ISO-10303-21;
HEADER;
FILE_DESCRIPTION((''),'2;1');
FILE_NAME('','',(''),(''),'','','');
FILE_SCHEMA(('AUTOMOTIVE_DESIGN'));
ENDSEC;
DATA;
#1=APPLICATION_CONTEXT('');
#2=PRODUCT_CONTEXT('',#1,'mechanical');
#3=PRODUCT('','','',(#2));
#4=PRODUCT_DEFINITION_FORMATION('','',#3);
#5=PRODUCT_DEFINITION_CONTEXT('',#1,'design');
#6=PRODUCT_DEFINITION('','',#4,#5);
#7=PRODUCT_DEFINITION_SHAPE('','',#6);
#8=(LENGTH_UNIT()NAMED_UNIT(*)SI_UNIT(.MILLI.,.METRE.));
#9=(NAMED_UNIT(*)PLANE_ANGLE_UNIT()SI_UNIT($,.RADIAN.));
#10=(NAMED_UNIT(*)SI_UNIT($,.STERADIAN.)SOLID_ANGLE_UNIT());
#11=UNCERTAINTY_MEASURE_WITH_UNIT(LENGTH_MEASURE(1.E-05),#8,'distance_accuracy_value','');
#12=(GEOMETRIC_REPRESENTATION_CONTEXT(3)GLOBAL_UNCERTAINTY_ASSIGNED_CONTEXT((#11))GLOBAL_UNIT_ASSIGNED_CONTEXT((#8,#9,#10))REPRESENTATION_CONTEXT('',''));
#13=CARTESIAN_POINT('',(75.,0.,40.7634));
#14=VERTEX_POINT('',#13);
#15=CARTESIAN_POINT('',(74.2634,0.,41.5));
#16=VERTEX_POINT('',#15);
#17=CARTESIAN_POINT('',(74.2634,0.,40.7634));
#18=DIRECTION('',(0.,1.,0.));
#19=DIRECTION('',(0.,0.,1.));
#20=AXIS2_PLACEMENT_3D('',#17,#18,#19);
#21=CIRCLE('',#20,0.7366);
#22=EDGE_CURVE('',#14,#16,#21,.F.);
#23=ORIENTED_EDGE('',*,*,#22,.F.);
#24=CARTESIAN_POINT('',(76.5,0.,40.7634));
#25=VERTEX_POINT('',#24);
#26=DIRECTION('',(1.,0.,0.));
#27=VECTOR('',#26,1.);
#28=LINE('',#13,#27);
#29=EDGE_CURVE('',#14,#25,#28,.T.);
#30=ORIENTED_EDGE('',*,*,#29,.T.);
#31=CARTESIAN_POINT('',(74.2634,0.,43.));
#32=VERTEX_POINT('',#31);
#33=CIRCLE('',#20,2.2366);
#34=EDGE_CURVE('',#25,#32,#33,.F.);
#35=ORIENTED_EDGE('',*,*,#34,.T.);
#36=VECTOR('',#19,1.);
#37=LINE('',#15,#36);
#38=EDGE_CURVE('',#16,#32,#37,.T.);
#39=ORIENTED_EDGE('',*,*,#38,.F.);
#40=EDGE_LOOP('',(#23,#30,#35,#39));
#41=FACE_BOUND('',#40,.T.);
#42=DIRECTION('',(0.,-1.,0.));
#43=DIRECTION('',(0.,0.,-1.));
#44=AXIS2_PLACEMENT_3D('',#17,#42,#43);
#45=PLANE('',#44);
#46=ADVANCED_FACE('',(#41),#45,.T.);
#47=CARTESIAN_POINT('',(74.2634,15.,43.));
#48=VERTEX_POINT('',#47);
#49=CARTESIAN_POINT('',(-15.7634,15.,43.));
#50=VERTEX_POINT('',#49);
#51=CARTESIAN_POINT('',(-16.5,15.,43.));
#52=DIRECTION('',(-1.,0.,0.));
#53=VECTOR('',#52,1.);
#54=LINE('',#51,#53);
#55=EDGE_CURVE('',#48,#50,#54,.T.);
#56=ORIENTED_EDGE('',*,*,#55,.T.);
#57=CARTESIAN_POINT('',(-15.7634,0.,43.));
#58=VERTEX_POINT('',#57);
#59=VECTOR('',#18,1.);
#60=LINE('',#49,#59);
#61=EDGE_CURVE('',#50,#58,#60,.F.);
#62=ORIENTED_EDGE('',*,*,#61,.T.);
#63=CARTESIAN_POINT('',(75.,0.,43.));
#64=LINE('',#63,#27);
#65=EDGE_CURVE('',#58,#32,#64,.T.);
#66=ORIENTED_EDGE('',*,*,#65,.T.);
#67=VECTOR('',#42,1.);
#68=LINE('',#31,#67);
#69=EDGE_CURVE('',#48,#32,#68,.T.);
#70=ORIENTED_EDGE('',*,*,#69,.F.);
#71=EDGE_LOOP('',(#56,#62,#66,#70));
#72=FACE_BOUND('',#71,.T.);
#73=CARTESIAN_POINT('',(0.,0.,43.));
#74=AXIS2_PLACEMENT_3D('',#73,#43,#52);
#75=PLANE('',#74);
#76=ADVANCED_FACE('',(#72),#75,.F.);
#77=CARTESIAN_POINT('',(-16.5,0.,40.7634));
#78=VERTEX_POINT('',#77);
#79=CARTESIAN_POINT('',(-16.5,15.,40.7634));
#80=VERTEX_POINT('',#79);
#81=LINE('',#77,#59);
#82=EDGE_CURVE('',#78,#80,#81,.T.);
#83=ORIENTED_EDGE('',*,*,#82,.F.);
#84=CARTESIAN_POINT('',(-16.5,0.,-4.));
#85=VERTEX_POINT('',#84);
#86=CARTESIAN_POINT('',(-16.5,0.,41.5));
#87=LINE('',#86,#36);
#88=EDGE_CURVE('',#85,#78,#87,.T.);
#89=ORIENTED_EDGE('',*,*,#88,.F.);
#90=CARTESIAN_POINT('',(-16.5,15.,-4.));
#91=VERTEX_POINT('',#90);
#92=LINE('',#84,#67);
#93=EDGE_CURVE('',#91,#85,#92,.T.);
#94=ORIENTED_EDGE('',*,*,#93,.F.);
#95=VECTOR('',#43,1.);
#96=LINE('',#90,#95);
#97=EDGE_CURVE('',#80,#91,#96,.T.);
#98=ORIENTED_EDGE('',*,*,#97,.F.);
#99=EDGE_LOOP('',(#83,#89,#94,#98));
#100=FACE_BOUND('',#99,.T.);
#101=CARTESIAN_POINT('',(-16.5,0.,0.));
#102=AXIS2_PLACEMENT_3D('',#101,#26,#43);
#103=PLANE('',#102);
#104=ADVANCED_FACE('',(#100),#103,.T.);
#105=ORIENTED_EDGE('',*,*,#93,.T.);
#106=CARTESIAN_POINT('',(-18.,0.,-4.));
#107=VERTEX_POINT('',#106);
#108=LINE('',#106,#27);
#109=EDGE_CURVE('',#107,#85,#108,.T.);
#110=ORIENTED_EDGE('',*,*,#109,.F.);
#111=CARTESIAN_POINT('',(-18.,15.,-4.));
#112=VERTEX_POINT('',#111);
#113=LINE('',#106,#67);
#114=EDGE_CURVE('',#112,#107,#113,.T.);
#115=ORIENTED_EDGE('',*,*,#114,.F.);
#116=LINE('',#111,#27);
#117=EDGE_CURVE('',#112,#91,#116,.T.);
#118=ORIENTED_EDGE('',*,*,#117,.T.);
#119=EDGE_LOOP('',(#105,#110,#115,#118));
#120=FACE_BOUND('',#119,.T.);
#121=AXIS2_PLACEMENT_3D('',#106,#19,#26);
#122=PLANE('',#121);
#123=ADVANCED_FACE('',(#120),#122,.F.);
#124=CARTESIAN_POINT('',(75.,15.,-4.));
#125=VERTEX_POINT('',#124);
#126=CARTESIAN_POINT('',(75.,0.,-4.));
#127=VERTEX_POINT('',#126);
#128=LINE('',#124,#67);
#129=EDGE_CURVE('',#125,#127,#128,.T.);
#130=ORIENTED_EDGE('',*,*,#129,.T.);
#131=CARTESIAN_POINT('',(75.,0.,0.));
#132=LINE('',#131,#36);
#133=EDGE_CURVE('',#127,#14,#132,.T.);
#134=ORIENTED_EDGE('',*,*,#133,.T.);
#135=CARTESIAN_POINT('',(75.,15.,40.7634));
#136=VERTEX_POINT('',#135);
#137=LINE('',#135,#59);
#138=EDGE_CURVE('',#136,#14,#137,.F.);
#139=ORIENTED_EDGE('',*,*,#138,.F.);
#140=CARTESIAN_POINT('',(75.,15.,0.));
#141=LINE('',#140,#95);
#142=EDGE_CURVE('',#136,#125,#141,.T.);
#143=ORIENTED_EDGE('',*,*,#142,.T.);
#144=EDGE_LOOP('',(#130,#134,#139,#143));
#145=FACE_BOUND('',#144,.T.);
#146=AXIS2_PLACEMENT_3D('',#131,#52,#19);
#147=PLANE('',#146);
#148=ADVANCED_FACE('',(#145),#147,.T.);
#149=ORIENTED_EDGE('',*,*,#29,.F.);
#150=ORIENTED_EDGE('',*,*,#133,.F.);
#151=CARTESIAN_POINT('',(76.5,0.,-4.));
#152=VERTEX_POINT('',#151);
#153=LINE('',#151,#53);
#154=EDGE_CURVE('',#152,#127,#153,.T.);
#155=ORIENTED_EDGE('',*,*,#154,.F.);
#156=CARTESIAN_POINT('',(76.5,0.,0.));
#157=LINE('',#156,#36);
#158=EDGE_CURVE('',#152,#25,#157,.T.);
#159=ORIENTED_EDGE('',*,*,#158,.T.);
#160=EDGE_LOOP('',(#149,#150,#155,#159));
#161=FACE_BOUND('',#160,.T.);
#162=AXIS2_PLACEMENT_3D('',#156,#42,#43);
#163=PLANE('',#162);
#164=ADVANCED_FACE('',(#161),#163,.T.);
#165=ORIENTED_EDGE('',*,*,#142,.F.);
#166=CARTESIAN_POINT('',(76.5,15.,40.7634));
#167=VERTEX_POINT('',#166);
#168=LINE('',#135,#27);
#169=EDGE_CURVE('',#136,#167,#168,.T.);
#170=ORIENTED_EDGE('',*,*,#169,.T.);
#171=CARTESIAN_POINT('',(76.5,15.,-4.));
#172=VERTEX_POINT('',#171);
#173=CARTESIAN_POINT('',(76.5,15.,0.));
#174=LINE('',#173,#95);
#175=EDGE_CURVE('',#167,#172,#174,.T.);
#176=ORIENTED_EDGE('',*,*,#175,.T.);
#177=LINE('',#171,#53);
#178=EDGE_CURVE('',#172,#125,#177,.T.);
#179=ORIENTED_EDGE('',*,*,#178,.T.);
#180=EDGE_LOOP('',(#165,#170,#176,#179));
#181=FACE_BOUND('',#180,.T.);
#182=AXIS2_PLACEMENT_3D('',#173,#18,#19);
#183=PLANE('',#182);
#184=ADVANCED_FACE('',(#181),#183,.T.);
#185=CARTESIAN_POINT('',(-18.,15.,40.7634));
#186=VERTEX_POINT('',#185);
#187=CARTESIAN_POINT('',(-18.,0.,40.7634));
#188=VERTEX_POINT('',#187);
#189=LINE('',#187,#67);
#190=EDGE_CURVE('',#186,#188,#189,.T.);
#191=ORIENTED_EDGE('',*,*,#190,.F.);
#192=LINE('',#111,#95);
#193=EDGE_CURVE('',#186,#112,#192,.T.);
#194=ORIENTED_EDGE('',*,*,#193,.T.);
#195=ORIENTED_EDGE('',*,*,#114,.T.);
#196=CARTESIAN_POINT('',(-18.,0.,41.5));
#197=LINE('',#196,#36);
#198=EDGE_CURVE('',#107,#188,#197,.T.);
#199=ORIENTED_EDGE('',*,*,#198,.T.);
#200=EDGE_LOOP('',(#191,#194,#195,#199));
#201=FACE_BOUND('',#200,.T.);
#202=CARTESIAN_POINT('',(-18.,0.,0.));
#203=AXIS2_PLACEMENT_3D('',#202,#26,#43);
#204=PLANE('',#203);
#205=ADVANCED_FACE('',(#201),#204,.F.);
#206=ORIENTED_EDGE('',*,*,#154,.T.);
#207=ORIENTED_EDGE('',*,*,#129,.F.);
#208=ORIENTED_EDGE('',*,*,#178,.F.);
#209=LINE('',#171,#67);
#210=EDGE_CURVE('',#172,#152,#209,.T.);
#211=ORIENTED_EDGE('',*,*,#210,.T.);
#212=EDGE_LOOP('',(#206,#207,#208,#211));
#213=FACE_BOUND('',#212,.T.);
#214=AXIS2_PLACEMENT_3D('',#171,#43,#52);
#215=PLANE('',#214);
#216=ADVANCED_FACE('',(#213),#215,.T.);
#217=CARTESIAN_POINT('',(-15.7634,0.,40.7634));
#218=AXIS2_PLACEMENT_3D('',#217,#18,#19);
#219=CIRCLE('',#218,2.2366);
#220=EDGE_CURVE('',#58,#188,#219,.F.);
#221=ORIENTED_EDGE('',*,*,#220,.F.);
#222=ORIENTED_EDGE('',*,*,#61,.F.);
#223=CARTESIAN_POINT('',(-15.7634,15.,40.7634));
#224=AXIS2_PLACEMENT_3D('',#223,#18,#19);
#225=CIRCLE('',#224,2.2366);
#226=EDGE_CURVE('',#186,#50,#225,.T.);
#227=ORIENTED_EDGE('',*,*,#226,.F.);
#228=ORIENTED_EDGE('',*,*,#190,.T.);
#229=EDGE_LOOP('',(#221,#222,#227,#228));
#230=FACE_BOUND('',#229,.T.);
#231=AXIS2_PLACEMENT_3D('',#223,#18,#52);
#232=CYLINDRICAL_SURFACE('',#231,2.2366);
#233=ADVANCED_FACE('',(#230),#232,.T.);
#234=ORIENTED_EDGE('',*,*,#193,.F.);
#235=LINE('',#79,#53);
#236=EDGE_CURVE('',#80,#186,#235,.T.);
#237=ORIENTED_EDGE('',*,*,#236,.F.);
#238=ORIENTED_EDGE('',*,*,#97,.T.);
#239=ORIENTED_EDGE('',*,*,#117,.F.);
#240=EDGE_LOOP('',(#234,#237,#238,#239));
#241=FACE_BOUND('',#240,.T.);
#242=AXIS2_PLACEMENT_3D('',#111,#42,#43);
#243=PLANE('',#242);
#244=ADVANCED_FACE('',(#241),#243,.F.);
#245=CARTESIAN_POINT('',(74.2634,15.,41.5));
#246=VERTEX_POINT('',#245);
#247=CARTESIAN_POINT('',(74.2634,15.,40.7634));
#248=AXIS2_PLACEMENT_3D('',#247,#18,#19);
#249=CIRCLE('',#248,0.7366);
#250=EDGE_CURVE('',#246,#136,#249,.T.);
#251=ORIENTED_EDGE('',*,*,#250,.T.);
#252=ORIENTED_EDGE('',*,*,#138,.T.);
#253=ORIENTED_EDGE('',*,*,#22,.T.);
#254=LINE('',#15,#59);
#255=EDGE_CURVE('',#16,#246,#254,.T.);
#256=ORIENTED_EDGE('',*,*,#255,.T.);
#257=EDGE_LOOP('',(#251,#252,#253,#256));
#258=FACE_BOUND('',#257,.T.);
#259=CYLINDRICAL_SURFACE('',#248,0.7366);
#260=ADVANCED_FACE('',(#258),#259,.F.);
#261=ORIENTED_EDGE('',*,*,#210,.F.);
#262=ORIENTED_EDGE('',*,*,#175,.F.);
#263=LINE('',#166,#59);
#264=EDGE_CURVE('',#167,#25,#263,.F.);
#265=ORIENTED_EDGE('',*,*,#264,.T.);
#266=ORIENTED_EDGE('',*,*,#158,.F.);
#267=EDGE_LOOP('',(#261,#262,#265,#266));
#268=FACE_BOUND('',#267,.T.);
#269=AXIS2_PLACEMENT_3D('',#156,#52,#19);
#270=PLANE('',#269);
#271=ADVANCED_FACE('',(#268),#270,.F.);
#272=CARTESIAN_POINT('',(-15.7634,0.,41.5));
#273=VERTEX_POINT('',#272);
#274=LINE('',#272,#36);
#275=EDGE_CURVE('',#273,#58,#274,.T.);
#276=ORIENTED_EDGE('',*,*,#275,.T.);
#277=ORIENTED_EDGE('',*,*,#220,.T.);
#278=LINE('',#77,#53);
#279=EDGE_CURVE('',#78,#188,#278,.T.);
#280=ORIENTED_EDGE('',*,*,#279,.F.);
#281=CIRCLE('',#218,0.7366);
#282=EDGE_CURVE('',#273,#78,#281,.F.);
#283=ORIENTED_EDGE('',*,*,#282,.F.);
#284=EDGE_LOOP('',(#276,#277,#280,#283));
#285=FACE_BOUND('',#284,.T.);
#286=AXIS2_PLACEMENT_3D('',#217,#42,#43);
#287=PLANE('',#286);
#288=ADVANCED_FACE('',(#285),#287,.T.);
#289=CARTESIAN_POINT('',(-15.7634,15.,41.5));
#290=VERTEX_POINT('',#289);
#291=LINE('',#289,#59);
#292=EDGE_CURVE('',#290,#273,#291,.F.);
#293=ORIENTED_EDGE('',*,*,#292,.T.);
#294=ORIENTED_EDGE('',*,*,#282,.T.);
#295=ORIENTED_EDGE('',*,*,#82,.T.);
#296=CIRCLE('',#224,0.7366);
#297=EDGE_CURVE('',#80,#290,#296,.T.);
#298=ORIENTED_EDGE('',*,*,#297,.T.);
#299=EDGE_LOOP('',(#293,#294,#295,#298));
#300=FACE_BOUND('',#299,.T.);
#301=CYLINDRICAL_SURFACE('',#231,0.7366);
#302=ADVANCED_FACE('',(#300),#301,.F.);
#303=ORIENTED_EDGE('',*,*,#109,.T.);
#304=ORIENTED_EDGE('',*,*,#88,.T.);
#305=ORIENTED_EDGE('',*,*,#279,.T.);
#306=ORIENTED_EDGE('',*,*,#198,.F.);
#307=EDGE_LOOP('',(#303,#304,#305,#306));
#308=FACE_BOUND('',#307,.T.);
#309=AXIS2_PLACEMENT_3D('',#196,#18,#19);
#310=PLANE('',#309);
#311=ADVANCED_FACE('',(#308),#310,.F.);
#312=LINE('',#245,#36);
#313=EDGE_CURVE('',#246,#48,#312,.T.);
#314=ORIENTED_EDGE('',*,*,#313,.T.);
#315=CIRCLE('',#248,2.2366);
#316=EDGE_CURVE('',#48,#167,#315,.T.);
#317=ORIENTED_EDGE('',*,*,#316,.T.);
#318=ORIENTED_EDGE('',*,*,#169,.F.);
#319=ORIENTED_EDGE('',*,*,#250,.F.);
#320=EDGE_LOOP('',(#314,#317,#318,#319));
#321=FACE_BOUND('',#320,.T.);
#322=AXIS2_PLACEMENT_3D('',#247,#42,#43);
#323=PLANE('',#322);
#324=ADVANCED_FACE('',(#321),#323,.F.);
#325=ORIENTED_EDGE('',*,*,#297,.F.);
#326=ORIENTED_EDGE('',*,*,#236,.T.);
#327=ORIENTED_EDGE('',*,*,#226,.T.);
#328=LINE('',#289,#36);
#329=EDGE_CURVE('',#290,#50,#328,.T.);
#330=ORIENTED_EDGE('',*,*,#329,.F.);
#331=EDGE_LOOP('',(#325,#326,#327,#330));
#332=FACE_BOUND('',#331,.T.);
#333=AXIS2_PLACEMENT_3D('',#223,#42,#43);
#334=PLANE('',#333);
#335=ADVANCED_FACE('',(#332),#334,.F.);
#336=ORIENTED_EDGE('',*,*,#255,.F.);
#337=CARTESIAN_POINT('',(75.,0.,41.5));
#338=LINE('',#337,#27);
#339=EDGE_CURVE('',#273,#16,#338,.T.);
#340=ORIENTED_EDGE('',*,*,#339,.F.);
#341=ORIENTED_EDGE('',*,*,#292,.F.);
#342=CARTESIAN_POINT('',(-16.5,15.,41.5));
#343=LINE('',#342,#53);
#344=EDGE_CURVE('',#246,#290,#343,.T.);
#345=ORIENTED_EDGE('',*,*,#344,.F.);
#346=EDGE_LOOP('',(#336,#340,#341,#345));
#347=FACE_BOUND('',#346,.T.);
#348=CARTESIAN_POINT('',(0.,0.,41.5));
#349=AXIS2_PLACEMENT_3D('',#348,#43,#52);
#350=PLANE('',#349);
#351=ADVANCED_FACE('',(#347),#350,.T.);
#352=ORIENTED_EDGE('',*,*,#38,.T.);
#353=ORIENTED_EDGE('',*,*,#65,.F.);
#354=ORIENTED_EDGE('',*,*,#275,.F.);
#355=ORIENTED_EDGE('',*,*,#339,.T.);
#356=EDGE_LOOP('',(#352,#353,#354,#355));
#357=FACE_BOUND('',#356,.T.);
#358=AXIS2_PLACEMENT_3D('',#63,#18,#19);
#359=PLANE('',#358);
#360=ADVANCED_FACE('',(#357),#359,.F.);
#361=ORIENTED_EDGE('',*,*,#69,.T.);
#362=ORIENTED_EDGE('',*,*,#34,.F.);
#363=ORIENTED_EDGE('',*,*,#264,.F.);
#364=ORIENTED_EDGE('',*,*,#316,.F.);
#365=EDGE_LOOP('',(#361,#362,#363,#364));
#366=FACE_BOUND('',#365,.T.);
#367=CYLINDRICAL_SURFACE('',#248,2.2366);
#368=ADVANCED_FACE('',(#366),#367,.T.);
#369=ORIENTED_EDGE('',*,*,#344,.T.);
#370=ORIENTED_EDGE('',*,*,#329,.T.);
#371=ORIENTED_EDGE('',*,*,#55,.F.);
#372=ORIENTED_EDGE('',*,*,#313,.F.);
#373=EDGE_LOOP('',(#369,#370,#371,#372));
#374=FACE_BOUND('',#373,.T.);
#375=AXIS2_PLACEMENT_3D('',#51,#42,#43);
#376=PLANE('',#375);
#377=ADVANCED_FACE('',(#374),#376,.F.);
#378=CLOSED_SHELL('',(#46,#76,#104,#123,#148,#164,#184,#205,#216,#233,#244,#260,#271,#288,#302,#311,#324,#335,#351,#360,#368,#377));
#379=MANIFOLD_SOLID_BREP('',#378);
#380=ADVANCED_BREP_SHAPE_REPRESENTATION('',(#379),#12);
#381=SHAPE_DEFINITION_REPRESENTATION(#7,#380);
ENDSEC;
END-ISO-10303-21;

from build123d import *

# Parameters (mm, degrees)
BASE_FLANGE1_DEPTH           = 1.5
EDGE_FLANGE1_STRIP_W         = 7.4732
EDGE_FLANGE1_STRIP_H         = 1.5
EDGE_FLANGE1_STRIP_CUT_DEPTH = 15
EDGE_FLANGE1_DEPTH           = 15
EDGE_FLANGE2_STRIP_W         = 7.4732
EDGE_FLANGE2_STRIP_H         = 1.5
EDGE_FLANGE2_STRIP_CUT_DEPTH = 15
EDGE_FLANGE2_DEPTH           = 15


# Sheet-metal steps are written as plain solids
with BuildPart() as part:
    # Sketch3 → Base-Flange1 (new body)
    with BuildSketch(Plane.ZY.offset(-75)):
        Polygon((0, 15), (41.5, 15), (41.5, 0), (0, 0), (-4, 0), (-4, 15), align=None)
    extrude(amount=-BASE_FLANGE1_DEPTH)

    # Edge-Flange1 strip (across the edge) → Edge-Flange1 strip cut (cut)
    with BuildSketch(Plane(origin=(75, 0, 41.5), x_dir=(0, 0, -1), z_dir=(0, 1, 0))):
        with Locations((-3, -0.75)):
            Rectangle(EDGE_FLANGE1_STRIP_W, EDGE_FLANGE1_STRIP_H)
    extrude(amount=EDGE_FLANGE1_STRIP_CUT_DEPTH, mode=Mode.SUBTRACT)

    # Edge-Flange1 section (across the edge) → Edge-Flange1 (add)
    with BuildSketch(Plane(origin=(75, 0, 41.5), x_dir=(0, 0, -1), z_dir=(0, 1, 0))):
        with BuildLine():
            Line((-1.5, 0.7366), (-1.5, 91.5))
            Line((-1.5, 91.5), (0, 91.5))
            Line((0, 91.5), (0, 0.7366))
            ThreePointArc((0, 0.7366), (0.215745145, 0.215745145), (0.7366, 0))
            Line((0.7366, 0), (0.7366, -1.5))
            ThreePointArc((0.7366, -1.5), (-0.844915027, -0.844915027), (-1.5, 0.7366))
        make_face()
    extrude(amount=EDGE_FLANGE1_DEPTH)

    # Edge-Flange2 strip (across the edge) → Edge-Flange2 strip cut (cut)
    with BuildSketch(Plane(origin=(-16.5, 0, 41.5), x_dir=(1, 0, 0), z_dir=(0, 1, 0))):
        with Locations((-3, -0.75)):
            Rectangle(EDGE_FLANGE2_STRIP_W, EDGE_FLANGE2_STRIP_H)
    extrude(amount=EDGE_FLANGE2_STRIP_CUT_DEPTH, mode=Mode.SUBTRACT)

    # Edge-Flange2 section (across the edge) → Edge-Flange2 (add)
    with BuildSketch(Plane(origin=(-16.5, 0, 41.5), x_dir=(1, 0, 0), z_dir=(0, 1, 0))):
        with BuildLine():
            Line((-1.5, 0.7366), (-1.5, 45.5))
            Line((-1.5, 45.5), (0, 45.5))
            Line((0, 45.5), (0, 0.7366))
            ThreePointArc((0, 0.7366), (0.215745145, 0.215745145), (0.7366, 0))
            Line((0.7366, 0), (0.7366, -1.5))
            ThreePointArc((0.7366, -1.5), (-0.844915027, -0.844915027), (-1.5, 0.7366))
        make_face()
    extrude(amount=EDGE_FLANGE2_DEPTH)


solid = part.part
